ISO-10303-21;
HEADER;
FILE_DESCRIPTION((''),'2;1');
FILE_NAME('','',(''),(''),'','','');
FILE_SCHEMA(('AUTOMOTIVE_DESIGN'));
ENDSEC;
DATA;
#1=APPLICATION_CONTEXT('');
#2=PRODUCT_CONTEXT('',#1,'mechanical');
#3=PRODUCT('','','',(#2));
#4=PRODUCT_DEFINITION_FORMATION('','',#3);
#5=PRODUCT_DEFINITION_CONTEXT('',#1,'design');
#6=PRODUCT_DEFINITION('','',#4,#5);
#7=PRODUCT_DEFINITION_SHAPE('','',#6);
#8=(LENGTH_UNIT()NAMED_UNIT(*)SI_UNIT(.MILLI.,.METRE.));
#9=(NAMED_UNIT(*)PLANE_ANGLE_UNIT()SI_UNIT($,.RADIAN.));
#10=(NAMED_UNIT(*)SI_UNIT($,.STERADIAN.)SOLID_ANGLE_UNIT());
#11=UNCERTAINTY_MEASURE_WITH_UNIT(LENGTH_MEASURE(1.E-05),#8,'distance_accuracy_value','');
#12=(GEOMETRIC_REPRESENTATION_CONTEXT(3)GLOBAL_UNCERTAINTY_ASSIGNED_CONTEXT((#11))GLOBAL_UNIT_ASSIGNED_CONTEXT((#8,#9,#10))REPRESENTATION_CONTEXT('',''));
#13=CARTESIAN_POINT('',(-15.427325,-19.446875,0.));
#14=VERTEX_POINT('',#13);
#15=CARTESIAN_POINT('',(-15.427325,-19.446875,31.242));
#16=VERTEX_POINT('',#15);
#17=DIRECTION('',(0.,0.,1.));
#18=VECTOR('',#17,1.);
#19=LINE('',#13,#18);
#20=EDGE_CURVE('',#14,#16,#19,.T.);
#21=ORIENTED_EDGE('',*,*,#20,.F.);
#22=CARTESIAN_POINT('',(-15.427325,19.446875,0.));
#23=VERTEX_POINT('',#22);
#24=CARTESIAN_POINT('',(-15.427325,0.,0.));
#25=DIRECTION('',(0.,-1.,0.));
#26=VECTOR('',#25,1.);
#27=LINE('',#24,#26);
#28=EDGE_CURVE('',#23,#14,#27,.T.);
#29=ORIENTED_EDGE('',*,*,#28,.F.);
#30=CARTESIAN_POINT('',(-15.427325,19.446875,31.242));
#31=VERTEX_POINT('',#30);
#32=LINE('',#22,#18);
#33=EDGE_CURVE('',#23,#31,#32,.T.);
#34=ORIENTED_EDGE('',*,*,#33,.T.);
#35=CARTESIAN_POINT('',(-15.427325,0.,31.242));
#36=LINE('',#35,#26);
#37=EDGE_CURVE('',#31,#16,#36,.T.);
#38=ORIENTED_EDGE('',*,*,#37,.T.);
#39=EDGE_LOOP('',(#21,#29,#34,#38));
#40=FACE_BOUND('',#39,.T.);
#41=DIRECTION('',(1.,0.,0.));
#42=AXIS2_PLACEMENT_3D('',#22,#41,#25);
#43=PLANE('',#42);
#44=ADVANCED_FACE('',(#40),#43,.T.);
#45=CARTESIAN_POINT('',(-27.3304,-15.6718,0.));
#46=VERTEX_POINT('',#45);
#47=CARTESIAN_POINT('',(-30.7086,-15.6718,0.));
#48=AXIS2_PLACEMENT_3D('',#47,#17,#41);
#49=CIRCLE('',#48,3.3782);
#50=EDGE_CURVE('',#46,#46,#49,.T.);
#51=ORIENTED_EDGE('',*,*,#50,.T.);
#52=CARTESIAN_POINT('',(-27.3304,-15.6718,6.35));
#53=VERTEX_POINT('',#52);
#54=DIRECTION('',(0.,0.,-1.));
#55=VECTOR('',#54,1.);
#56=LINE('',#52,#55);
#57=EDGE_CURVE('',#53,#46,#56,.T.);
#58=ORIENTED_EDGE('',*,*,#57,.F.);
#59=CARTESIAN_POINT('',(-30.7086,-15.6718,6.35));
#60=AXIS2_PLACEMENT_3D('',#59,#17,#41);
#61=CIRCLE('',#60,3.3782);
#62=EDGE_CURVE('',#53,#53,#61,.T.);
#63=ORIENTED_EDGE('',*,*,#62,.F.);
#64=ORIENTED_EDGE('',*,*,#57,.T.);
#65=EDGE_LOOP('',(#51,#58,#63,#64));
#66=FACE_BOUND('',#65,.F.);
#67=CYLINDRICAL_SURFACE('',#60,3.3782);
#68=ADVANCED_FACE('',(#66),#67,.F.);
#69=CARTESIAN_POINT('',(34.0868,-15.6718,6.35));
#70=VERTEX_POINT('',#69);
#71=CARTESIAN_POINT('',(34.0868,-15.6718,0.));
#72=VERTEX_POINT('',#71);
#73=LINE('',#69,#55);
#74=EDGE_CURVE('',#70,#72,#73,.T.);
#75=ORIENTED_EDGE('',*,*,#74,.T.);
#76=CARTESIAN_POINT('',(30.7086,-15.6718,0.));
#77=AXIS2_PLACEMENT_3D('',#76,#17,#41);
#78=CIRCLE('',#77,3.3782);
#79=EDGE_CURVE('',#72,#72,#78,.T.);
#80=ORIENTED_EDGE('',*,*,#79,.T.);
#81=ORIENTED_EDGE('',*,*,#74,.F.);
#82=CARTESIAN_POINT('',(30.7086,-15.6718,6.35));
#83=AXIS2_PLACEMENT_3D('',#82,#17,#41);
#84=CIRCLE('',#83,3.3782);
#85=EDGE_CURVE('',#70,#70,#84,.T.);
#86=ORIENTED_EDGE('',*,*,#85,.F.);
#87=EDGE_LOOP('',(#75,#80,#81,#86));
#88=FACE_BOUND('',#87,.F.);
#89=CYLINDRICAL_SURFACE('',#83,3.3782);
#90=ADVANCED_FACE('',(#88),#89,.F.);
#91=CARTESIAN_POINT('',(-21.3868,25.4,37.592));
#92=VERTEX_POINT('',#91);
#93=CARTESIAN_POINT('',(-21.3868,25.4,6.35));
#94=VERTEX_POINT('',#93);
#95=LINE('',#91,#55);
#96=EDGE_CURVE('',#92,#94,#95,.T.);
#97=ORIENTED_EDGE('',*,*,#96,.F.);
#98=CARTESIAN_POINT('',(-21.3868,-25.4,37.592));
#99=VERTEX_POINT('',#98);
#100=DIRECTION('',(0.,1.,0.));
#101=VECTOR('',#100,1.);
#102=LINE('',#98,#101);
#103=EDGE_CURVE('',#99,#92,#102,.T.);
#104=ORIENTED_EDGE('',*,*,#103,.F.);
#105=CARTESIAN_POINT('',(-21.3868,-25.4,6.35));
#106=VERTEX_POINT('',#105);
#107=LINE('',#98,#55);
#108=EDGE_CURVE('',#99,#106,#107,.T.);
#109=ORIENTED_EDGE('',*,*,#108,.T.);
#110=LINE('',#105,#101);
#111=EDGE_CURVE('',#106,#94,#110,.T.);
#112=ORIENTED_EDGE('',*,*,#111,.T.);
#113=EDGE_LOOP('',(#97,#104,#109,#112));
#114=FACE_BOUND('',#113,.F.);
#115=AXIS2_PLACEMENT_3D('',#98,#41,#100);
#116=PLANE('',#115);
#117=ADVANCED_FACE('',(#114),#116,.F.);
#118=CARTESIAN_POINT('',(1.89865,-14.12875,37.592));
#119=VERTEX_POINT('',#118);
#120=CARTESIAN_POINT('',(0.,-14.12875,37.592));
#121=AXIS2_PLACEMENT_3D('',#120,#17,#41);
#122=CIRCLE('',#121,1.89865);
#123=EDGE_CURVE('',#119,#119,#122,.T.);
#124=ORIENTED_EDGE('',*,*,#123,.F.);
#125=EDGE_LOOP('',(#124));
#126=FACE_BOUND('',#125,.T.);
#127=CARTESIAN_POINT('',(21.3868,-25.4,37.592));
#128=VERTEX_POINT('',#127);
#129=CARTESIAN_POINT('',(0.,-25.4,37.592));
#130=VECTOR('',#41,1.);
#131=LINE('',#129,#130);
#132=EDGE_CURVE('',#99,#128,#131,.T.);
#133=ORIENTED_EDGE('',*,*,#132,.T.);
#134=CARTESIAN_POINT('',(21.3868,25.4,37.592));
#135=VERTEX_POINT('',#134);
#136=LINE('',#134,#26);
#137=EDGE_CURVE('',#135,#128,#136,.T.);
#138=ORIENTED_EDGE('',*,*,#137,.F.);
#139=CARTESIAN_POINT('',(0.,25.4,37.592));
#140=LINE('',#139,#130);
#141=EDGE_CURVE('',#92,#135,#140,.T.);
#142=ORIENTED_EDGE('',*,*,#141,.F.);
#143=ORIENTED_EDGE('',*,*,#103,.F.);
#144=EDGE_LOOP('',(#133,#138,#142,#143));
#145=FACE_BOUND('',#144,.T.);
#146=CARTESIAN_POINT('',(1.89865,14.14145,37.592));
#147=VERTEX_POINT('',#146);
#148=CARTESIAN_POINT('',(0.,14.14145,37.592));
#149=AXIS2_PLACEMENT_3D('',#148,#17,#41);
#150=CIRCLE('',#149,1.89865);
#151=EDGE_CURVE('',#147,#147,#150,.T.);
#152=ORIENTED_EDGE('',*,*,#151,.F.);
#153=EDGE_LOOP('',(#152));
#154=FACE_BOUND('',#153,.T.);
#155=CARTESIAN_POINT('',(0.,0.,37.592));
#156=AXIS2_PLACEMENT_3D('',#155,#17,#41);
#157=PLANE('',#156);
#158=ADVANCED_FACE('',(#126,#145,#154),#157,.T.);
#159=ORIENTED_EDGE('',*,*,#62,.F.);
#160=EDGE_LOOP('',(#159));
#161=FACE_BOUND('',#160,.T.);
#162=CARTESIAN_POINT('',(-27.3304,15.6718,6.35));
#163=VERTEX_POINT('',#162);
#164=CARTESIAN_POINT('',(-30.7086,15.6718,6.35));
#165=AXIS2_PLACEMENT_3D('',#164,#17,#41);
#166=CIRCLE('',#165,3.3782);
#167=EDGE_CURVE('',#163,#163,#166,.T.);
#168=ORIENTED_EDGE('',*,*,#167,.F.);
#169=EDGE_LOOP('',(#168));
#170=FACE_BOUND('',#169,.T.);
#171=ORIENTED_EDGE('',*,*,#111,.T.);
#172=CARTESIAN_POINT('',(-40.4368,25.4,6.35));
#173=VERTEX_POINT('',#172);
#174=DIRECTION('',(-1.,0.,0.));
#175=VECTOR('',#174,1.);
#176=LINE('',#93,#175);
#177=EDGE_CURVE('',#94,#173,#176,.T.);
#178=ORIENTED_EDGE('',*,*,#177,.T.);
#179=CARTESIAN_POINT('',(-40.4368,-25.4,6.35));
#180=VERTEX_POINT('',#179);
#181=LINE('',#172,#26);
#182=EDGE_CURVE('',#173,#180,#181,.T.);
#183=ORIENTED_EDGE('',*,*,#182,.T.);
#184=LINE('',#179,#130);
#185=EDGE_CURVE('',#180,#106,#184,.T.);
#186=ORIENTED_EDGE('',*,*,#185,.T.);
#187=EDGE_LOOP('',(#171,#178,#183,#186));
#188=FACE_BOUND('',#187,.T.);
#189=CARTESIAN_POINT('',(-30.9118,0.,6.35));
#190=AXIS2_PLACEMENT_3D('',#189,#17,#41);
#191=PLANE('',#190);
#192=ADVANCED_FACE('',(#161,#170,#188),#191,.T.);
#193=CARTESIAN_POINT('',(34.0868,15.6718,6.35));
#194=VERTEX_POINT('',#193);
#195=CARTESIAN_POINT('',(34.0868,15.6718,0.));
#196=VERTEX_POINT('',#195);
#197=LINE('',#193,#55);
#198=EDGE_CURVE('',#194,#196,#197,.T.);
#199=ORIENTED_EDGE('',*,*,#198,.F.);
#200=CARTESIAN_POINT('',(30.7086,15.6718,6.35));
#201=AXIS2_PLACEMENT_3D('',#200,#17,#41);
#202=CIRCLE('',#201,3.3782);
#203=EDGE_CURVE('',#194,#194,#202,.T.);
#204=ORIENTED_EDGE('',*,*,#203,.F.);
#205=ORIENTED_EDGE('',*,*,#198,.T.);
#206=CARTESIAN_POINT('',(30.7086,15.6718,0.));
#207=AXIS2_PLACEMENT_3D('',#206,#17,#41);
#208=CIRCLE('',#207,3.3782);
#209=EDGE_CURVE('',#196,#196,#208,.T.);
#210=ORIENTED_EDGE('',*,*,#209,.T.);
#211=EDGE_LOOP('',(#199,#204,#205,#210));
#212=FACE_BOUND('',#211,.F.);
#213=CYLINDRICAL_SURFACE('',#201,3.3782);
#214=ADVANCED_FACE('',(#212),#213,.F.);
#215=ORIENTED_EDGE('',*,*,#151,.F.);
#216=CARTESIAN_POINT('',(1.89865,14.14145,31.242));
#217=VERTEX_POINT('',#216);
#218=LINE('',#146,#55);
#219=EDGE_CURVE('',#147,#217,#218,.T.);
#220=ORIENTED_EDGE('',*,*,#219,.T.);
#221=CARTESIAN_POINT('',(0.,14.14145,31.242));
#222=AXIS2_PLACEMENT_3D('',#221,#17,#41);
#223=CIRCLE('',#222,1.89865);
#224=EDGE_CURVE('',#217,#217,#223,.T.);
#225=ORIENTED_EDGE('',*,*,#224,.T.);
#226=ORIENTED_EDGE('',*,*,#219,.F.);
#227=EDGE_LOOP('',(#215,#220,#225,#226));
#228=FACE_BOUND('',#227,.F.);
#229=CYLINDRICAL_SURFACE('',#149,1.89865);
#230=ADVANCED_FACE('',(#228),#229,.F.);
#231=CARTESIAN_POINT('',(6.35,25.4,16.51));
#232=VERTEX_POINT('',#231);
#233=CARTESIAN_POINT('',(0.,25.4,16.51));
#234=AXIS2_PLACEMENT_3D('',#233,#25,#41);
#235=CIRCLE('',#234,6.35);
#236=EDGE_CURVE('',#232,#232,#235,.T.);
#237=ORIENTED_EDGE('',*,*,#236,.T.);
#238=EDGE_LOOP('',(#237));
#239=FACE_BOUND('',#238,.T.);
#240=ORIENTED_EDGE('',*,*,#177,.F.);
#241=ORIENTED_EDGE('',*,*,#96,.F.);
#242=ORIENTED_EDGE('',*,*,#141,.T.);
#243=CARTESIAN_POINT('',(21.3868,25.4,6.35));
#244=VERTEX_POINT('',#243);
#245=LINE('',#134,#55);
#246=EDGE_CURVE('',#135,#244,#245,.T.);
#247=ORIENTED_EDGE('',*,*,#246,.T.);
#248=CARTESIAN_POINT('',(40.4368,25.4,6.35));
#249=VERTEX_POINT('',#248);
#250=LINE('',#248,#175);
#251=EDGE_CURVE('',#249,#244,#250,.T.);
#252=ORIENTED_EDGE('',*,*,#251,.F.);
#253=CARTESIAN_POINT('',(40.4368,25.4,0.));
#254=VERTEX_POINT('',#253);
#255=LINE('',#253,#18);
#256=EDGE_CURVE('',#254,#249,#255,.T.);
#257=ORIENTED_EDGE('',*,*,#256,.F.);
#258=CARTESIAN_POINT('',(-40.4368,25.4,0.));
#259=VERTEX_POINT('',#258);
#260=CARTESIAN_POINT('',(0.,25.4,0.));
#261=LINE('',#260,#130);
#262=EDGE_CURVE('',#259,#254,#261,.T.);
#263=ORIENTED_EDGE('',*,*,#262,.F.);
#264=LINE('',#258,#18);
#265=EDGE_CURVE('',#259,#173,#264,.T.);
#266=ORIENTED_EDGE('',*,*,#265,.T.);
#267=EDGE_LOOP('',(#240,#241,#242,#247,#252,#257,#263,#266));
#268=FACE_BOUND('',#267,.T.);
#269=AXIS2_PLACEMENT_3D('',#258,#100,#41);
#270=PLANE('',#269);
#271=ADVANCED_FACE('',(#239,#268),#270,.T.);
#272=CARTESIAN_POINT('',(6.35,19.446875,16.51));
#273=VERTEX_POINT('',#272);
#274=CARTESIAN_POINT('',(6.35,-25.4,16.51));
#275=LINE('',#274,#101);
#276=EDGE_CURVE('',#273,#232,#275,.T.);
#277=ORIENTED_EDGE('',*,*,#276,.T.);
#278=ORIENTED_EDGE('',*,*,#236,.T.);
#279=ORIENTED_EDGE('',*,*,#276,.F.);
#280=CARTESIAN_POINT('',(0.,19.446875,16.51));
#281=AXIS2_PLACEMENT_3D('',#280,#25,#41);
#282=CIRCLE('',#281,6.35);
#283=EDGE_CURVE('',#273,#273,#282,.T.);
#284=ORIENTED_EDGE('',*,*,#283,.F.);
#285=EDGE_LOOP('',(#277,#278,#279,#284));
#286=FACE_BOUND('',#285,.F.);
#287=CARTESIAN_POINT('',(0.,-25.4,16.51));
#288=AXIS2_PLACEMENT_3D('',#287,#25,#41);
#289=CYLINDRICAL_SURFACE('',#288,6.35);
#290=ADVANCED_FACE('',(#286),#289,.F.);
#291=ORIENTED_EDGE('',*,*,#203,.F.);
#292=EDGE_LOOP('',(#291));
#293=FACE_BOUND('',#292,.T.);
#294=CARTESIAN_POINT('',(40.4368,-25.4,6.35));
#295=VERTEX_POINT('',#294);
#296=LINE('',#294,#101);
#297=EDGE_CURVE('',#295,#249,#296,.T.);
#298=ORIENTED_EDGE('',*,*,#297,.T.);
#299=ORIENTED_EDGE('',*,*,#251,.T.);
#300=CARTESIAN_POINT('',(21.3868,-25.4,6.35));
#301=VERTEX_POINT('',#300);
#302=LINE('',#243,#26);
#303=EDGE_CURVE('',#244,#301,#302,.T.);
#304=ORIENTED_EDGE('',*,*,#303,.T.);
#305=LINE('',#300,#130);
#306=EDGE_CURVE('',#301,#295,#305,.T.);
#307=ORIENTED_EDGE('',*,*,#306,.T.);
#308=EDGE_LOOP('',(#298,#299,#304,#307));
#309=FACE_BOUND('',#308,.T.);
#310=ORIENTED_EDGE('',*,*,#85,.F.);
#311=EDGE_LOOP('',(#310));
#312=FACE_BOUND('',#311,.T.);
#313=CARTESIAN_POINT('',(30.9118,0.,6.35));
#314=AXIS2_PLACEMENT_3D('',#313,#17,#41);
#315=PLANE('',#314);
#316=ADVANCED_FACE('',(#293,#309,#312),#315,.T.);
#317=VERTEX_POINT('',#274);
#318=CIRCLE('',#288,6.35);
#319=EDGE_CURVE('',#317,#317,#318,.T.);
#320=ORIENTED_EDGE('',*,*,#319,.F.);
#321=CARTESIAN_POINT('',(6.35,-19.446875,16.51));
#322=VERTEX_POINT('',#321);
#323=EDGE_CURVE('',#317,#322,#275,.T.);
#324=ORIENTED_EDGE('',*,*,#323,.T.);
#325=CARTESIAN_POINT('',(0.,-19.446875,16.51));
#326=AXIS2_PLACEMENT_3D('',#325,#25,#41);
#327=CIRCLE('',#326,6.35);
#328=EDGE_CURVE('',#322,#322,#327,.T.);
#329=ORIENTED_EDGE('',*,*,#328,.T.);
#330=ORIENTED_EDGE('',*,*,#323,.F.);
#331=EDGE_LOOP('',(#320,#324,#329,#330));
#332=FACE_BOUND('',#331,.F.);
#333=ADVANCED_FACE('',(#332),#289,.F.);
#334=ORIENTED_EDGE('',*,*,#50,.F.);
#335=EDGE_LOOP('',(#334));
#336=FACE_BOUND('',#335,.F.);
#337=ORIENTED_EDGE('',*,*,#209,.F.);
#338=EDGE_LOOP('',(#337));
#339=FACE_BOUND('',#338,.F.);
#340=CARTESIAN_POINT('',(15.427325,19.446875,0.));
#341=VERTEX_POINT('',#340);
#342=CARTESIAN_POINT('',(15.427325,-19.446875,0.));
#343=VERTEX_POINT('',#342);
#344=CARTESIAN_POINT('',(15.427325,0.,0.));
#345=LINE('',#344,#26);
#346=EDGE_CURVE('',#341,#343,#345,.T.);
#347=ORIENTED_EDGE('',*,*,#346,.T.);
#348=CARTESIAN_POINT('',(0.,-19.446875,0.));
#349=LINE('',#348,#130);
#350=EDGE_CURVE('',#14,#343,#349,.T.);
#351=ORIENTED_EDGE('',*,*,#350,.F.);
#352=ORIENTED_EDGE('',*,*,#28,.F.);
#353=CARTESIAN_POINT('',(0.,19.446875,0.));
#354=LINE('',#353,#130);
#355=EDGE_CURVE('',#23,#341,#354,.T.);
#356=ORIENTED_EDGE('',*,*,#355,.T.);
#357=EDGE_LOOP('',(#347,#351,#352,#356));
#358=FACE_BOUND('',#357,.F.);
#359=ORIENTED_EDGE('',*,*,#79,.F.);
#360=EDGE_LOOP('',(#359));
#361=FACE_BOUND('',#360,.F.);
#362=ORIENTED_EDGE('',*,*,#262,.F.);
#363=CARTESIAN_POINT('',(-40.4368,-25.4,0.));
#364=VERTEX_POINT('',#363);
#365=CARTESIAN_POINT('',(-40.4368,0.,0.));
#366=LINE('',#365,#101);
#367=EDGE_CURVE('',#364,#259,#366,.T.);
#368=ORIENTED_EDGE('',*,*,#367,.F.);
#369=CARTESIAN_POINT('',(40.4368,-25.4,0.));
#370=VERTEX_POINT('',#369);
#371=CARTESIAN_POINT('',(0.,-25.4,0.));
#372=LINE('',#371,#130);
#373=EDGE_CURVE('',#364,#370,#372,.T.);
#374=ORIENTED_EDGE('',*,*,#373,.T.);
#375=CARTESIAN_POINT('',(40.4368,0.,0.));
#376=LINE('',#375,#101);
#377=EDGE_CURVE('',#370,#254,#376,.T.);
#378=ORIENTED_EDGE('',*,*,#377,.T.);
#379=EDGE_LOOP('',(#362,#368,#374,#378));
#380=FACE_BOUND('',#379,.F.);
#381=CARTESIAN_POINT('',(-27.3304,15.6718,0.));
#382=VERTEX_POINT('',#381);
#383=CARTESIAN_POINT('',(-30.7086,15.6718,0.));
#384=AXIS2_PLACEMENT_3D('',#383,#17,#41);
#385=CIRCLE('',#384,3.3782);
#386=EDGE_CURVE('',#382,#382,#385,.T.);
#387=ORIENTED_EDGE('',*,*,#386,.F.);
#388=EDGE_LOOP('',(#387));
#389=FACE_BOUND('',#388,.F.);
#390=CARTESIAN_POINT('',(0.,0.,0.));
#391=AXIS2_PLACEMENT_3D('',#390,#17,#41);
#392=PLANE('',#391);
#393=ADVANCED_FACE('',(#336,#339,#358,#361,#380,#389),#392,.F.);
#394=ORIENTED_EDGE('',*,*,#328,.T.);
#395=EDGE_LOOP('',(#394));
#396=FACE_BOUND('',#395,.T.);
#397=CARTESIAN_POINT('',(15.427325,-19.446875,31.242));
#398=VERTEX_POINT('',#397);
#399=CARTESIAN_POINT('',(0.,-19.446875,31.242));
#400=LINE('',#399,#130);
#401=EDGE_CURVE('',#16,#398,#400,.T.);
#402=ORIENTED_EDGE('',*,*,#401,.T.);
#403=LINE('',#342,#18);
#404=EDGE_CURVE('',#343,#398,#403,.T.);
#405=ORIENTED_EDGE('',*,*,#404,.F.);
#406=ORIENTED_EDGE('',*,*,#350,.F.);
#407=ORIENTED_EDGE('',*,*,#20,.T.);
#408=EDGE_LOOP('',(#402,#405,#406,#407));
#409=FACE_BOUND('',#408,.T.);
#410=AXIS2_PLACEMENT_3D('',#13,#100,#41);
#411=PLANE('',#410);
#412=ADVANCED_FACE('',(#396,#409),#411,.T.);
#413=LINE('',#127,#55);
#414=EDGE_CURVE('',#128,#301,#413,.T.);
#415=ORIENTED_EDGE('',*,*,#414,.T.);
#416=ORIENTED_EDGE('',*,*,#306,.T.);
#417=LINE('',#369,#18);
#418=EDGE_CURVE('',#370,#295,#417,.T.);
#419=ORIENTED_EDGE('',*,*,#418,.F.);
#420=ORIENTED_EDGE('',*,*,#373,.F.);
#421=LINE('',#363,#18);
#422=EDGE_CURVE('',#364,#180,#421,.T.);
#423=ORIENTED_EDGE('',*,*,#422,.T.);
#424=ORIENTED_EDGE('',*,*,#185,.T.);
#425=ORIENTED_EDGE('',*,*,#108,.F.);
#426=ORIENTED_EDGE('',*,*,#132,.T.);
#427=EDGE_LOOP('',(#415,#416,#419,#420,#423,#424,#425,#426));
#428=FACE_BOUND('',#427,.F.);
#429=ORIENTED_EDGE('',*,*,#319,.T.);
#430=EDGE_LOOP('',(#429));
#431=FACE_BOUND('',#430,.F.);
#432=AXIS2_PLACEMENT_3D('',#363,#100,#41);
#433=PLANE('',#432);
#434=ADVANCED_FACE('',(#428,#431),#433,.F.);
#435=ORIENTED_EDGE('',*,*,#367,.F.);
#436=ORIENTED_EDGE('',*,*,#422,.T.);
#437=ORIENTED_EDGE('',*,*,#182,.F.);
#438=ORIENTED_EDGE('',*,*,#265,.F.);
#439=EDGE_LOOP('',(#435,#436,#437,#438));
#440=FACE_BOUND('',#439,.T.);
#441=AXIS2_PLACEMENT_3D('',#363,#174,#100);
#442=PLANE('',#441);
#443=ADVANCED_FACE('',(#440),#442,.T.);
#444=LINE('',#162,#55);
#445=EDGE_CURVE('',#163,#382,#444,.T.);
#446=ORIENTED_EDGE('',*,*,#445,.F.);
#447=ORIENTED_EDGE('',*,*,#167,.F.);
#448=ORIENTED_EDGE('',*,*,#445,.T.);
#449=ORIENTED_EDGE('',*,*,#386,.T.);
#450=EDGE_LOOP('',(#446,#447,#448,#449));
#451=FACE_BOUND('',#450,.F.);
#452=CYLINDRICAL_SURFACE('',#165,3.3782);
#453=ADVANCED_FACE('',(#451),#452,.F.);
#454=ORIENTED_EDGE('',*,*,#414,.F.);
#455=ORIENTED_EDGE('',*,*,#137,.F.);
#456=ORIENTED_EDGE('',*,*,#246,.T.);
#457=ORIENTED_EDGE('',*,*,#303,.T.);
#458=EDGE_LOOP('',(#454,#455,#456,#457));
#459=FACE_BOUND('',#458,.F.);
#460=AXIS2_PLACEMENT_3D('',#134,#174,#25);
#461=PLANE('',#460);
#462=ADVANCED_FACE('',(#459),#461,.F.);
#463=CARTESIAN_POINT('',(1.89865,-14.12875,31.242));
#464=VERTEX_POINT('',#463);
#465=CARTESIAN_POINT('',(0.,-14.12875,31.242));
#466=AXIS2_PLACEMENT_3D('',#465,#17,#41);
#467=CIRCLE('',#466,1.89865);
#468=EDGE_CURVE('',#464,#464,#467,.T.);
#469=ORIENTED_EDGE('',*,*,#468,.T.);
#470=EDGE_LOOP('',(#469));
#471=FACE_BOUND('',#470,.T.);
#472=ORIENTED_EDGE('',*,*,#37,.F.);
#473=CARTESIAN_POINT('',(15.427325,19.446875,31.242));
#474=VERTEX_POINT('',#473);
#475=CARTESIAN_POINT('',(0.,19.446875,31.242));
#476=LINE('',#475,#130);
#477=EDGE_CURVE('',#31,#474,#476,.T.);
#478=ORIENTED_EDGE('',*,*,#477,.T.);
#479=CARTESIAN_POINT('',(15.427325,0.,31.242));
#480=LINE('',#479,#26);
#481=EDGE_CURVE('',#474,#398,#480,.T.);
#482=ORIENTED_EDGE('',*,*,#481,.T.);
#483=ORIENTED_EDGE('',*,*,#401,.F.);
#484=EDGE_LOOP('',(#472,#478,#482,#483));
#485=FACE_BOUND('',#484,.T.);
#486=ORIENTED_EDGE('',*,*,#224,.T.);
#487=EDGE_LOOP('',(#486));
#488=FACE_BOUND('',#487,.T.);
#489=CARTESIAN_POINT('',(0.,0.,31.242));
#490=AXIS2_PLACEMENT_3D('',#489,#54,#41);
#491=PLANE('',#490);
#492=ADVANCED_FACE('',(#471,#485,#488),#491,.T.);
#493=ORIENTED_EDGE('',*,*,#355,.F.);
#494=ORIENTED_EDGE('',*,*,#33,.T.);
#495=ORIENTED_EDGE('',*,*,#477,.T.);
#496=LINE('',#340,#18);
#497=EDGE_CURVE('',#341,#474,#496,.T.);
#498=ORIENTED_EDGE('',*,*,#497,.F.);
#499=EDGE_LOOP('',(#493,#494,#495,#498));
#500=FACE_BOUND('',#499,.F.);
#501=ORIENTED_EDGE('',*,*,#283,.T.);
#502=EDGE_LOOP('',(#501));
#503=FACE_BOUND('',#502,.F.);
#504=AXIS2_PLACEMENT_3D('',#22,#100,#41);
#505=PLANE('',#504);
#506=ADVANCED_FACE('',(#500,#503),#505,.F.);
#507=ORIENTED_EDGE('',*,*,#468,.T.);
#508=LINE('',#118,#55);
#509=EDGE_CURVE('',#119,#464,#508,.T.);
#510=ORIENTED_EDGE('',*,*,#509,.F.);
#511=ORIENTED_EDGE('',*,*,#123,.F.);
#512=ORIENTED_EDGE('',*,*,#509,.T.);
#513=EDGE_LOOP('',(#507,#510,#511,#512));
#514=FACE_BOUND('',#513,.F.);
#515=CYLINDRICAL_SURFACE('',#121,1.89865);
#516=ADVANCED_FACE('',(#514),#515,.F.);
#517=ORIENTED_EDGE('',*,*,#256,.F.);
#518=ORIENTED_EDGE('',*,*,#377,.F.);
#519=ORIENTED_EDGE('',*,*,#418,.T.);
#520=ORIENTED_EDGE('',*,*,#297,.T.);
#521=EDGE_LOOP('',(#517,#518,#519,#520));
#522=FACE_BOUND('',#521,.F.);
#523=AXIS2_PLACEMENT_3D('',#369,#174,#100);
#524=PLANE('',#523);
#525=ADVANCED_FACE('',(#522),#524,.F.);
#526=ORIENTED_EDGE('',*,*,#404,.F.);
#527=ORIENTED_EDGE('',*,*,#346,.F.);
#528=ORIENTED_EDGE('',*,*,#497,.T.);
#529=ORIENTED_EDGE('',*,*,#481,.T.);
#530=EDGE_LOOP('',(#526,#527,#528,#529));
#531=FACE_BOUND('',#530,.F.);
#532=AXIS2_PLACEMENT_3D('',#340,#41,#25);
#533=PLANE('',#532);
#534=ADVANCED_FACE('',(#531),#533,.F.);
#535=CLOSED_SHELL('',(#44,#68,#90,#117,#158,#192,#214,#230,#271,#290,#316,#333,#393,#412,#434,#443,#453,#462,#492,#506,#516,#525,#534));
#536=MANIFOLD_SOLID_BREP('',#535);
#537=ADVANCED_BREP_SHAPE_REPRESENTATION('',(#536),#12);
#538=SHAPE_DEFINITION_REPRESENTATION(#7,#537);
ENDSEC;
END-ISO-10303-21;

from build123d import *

# Parameters (mm, degrees)
F0_W      = 80.8736
F0_H      = 50.8
F1_DEPTH  = 37.592
F3_DEPTH  = 31.242
F4_W      = 30.85465
F4_H      = 38.89375
F5_DEPTH  = 31.242
F6_R      = 6.35
F7_DEPTH  = 25400
F8_DEPTH  = 31.242
F9_R      = 1.89865
F10_DEPTH = 25.4
F11_R     = 3.3782
F12_DEPTH = 25.4


# Not quite as in the source:
# - a feature names something its author has since deleted; it is built from what else it names


with BuildPart() as f1:
    # F0 (on Top) → F1 (new body)
    with BuildSketch(Plane.XY):
        Rectangle(F0_W, F0_H)
    extrude(amount=F1_DEPTH)

    # F2 (on face) → F3 (cut)
    with BuildSketch(Plane.XY.offset(37.592)):
        Polygon((40.4368, 25.4), (21.3868, 25.4), (21.3868, 19.05), (21.3868, -19.05), (21.3868, -25.4), (40.4368, -25.4), (40.4368, -19.05), (40.4368, 19.05), align=None)
    extrude(amount=-F3_DEPTH, mode=Mode.SUBTRACT)

    # F4 (on face) → F5 (cut)
    with BuildSketch(Plane(origin=(0, 0, 0), x_dir=(1, 0, 0), z_dir=(0, 0, -1))):
        Rectangle(F4_W, F4_H)
    extrude(amount=-F5_DEPTH, mode=Mode.SUBTRACT)

    # F6 (on face) → F7 (cut)
    with BuildSketch(Plane.XZ.offset(25.4)):
        with Locations((0, 16.51)):
            Circle(F6_R)
    extrude(amount=-F7_DEPTH, mode=Mode.SUBTRACT)

    # F2 (on face) → F8 (cut)
    with BuildSketch(Plane.XY.offset(37.592)):
        Polygon((-40.4368, 25.4), (-40.4368, 19.05), (-40.4368, -19.05), (-40.4368, -25.4), (-21.3868, -25.4), (-21.3868, -19.05), (-21.3868, 19.05), (-21.3868, 25.4), align=None)
    extrude(amount=-F8_DEPTH, mode=Mode.SUBTRACT)

    # F9 (on face) → F10 (cut)
    with BuildSketch(Plane.XY.offset(37.592)):
        with Locations((0, 14.14145)):
            Circle(F9_R)
        with Locations((0, -14.12875)):
            Circle(F9_R)
    extrude(amount=-F10_DEPTH, mode=Mode.SUBTRACT)

    # F11 (on face) → F12 (cut)
    with BuildSketch(Plane.XY.offset(6.35)):
        with Locations((-30.7086, 15.6718)):
            Circle(F11_R)
        with Locations((-30.7086, -15.6718)):
            Circle(F11_R)
        with Locations((30.7086, 15.6718)):
            Circle(F11_R)
        with Locations((30.7086, -15.6718)):
            Circle(F11_R)
    extrude(amount=-F12_DEPTH, mode=Mode.SUBTRACT)


solid = f1.part
